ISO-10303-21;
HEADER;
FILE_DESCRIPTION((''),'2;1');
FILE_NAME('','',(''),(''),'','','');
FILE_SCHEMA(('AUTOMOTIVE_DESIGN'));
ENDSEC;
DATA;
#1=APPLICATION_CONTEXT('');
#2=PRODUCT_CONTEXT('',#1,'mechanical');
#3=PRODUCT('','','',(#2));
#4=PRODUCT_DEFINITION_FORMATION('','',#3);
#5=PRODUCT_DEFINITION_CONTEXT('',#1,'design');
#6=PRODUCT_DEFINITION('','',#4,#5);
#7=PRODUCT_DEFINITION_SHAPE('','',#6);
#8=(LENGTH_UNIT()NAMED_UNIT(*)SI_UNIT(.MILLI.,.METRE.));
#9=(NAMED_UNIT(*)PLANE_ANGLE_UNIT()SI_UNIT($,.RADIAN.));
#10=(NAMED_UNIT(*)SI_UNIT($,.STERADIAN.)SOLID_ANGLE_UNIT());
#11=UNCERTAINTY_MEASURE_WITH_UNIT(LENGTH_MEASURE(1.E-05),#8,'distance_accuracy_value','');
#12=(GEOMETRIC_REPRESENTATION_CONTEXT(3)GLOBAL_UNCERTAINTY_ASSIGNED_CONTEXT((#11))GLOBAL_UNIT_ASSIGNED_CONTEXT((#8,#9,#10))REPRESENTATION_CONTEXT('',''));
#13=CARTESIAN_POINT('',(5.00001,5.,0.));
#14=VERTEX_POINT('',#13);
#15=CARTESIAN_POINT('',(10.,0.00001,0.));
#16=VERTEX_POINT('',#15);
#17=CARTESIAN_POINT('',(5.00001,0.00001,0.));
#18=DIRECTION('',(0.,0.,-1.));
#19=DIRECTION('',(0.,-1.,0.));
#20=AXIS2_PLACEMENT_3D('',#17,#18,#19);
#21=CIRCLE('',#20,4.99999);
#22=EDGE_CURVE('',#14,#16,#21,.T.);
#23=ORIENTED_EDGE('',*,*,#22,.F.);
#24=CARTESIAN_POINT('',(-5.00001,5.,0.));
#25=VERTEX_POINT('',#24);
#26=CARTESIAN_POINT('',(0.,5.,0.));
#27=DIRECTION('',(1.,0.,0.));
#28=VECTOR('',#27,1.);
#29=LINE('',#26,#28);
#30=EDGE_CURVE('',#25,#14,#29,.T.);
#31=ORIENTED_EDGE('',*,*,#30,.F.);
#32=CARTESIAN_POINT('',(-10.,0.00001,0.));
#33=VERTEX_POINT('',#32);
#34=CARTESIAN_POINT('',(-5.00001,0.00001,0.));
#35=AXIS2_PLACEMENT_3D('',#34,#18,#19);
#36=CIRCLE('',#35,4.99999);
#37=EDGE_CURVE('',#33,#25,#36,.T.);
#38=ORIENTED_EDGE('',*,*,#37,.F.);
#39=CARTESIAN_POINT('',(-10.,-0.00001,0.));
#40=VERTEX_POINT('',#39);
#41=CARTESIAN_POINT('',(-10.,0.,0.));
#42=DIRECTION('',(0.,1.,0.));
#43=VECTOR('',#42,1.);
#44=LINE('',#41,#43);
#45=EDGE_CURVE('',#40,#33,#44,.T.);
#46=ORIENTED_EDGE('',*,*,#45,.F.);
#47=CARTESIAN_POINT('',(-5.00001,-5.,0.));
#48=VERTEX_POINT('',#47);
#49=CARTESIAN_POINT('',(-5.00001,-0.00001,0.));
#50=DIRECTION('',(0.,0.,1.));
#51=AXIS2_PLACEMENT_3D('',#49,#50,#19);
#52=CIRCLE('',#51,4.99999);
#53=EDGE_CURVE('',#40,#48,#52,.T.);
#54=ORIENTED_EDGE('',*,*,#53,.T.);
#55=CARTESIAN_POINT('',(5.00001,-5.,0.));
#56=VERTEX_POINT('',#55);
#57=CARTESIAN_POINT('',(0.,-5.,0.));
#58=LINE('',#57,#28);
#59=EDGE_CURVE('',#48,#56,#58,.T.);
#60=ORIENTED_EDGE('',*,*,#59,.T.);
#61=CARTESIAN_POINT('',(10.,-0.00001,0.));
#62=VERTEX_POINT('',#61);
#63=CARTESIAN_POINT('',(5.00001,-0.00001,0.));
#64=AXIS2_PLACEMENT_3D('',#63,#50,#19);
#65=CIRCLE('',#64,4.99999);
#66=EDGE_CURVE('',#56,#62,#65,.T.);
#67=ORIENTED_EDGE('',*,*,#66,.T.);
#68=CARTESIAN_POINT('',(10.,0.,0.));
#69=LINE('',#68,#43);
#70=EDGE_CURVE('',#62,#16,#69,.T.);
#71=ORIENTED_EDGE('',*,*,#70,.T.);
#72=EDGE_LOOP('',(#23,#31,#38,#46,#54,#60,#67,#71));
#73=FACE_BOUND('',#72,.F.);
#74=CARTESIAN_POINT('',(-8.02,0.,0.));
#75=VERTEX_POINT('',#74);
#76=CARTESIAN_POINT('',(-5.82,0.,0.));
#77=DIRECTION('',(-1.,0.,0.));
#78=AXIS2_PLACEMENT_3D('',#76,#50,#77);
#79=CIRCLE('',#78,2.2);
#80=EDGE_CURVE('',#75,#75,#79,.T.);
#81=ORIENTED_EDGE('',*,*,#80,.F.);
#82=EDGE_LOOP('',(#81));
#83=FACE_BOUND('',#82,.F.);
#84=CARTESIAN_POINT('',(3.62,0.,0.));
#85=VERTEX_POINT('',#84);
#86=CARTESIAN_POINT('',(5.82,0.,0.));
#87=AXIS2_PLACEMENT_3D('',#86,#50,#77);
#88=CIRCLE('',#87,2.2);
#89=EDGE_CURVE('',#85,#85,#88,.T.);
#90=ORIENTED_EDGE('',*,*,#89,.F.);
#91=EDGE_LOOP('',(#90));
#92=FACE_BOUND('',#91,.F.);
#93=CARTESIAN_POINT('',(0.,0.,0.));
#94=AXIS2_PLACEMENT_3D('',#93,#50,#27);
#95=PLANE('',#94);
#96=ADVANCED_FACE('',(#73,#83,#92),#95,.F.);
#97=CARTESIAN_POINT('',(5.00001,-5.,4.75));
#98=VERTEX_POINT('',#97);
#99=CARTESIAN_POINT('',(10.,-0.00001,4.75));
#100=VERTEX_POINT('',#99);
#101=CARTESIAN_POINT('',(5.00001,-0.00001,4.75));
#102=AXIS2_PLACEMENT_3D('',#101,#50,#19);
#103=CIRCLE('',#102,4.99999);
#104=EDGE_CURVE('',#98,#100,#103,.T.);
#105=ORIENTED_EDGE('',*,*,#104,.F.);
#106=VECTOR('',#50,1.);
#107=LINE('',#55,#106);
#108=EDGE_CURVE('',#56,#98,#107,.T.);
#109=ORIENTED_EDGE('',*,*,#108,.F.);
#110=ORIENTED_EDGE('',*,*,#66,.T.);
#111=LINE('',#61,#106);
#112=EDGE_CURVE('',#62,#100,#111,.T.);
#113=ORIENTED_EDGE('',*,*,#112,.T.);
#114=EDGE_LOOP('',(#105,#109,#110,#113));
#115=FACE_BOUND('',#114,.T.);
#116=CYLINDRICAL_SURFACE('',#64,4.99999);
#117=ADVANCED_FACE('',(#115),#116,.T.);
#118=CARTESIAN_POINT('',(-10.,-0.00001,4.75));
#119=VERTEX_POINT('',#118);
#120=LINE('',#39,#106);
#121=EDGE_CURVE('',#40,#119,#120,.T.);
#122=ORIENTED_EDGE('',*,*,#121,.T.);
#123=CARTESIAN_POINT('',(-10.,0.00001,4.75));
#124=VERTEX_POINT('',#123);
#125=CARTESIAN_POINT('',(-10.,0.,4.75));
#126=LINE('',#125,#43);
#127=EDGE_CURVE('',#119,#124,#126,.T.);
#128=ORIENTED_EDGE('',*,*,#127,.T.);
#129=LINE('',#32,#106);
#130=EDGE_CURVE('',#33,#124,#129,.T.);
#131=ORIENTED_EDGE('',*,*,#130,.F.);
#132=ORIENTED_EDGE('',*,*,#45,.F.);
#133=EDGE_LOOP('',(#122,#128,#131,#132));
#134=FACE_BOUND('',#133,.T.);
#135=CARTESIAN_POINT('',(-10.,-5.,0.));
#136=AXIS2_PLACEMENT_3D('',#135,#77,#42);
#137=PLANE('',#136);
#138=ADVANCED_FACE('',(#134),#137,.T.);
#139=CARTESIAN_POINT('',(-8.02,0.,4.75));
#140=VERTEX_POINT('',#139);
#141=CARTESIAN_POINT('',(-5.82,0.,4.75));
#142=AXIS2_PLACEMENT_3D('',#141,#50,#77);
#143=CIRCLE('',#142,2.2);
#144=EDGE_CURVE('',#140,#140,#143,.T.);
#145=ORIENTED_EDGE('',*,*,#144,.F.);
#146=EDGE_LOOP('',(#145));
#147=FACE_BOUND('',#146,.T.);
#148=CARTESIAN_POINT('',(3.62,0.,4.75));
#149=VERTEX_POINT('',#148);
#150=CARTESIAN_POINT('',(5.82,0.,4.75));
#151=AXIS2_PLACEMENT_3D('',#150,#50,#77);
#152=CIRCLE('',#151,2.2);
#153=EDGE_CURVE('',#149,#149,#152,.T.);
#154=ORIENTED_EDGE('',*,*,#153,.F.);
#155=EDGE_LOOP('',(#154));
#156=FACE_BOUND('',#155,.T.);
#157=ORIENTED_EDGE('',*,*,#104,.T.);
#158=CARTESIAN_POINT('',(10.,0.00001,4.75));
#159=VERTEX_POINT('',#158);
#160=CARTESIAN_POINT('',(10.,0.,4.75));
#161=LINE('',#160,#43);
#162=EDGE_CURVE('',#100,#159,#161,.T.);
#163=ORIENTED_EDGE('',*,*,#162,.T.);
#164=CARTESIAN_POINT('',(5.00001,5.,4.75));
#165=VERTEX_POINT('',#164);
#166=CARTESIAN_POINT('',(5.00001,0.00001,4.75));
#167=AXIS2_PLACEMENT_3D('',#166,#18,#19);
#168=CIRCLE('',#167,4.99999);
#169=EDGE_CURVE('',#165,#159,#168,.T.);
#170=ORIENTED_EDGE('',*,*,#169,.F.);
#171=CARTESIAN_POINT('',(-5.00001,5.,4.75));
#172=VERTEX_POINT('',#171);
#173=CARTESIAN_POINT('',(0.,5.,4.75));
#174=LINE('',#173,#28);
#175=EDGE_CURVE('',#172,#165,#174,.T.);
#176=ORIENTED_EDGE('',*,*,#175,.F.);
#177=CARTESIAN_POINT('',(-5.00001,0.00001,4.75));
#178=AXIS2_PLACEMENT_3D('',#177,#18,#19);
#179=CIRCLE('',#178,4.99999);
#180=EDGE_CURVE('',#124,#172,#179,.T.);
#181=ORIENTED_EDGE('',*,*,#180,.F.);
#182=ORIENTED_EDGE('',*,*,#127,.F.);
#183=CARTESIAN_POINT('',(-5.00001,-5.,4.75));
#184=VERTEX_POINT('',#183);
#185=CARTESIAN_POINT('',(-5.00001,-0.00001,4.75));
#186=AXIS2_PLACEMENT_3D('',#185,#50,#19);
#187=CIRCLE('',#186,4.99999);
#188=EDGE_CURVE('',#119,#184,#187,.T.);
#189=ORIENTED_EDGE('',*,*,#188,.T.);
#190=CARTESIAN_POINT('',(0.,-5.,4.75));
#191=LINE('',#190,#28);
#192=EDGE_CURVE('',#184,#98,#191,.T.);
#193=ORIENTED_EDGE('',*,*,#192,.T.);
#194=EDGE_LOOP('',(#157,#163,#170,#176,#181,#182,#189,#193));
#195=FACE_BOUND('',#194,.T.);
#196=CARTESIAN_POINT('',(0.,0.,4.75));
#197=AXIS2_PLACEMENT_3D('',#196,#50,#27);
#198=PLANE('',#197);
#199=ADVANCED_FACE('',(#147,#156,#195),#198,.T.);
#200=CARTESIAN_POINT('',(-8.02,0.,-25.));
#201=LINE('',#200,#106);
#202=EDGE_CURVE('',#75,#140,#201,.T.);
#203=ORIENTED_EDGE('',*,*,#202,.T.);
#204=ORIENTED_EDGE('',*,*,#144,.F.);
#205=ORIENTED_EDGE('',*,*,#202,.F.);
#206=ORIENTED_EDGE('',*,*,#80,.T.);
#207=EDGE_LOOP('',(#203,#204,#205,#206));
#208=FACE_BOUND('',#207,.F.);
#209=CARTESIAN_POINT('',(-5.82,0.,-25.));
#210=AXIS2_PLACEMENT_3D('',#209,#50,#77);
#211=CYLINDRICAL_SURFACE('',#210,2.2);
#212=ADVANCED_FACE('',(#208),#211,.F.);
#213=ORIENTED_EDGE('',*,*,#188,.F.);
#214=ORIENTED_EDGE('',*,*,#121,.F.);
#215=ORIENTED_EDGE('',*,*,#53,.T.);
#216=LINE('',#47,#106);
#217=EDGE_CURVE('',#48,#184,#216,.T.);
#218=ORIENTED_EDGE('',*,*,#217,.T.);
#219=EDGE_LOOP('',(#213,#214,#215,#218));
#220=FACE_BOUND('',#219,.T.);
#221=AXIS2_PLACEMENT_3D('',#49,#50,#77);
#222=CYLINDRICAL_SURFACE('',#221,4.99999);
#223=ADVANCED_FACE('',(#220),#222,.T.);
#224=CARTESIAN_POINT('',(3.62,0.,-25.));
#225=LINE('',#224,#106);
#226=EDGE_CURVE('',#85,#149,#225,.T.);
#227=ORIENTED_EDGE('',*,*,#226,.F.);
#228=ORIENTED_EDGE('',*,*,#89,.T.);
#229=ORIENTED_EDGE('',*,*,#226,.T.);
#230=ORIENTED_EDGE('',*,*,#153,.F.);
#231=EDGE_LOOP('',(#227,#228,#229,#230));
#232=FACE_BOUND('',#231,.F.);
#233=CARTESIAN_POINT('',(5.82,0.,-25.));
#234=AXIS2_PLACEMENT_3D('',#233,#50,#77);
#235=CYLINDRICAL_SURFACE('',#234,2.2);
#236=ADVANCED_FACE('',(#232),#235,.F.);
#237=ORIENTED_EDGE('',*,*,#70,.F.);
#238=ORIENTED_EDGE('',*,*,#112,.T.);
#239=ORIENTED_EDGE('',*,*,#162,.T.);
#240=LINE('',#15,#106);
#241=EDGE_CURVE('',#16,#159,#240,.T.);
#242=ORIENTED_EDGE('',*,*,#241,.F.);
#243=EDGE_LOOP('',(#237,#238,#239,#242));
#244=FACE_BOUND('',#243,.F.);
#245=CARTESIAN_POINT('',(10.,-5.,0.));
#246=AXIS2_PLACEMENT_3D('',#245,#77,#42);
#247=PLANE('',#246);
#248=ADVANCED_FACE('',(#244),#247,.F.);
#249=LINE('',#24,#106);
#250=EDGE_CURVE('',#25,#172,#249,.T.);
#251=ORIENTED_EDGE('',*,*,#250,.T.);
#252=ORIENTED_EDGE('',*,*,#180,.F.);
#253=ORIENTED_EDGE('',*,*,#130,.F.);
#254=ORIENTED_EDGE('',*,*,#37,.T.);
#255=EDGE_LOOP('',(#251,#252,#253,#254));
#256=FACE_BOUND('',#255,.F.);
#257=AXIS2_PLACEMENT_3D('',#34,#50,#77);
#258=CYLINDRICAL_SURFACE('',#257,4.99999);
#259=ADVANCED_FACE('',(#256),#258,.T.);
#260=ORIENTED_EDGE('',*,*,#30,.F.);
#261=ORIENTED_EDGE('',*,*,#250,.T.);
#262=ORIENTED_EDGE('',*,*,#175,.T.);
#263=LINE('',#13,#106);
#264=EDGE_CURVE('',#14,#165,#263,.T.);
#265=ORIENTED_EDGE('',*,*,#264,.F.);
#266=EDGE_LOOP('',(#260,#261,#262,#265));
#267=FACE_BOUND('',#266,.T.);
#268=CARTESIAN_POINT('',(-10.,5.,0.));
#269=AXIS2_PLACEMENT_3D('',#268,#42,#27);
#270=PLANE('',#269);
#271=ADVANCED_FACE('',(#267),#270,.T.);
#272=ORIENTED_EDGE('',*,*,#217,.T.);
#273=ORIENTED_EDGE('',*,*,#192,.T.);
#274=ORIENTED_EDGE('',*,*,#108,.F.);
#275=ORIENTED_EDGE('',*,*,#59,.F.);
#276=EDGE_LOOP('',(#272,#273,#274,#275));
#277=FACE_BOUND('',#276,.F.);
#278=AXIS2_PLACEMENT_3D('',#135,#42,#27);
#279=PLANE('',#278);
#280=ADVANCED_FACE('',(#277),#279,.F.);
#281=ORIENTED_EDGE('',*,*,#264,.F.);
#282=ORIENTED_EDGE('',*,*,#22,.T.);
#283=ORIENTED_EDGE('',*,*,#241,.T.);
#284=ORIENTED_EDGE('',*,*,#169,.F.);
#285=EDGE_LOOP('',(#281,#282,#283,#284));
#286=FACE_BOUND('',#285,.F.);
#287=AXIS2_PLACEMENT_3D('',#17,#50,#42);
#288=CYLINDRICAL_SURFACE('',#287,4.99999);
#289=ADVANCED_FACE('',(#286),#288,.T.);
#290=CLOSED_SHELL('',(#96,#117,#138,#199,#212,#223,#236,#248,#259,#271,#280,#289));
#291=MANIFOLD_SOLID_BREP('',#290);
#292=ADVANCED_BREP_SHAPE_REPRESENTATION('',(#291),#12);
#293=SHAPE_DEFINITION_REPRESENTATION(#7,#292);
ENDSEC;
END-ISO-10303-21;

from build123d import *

# Parameters (mm, degrees)
F0_W     = 20
F0_H     = 10
F1_DEPTH = 4.75
F2_D     = 4.4
F2_DEPTH = 25
F2_TIP   = 1.3218933619
F3_R     = 4.99999


# Not quite as in the source:
# - a fillet or chamfer is up to 0.001 mm smaller than in the source, because OpenCascade refuses the exact size


with BuildPart() as f1:
    # F0 (on Top) → F1 (new body)
    with BuildSketch(Plane.XY):
        Rectangle(F0_W, F0_H)
    extrude(amount=F1_DEPTH)

    # F2
    with Locations(Plane(origin=(0, 0, 0), x_dir=(1, 0, 0), z_dir=(0, 0, -1))):
        with Locations((-5.82, 0), (5.82, 0)):
            Hole(F2_D / 2, depth=F2_DEPTH)
            with Locations((0, 0, -(F2_DEPTH + F2_TIP / 2))):  # 118° drill point
                Cone(0, F2_D / 2, F2_TIP, mode=Mode.SUBTRACT)

    # F3 (radius 5 in the source; OpenCascade refuses exactly that, so slightly less here)
    f3_edges = [f1.edges().sort_by_distance(p)[0] for p in [
        (10, 5, 2.375),
        (10, -5, 2.375),
        (-10, 5, 2.375),
        (-10, -5, 2.375),
    ]]
    fillet(f3_edges, radius=F3_R)


solid = f1.part
